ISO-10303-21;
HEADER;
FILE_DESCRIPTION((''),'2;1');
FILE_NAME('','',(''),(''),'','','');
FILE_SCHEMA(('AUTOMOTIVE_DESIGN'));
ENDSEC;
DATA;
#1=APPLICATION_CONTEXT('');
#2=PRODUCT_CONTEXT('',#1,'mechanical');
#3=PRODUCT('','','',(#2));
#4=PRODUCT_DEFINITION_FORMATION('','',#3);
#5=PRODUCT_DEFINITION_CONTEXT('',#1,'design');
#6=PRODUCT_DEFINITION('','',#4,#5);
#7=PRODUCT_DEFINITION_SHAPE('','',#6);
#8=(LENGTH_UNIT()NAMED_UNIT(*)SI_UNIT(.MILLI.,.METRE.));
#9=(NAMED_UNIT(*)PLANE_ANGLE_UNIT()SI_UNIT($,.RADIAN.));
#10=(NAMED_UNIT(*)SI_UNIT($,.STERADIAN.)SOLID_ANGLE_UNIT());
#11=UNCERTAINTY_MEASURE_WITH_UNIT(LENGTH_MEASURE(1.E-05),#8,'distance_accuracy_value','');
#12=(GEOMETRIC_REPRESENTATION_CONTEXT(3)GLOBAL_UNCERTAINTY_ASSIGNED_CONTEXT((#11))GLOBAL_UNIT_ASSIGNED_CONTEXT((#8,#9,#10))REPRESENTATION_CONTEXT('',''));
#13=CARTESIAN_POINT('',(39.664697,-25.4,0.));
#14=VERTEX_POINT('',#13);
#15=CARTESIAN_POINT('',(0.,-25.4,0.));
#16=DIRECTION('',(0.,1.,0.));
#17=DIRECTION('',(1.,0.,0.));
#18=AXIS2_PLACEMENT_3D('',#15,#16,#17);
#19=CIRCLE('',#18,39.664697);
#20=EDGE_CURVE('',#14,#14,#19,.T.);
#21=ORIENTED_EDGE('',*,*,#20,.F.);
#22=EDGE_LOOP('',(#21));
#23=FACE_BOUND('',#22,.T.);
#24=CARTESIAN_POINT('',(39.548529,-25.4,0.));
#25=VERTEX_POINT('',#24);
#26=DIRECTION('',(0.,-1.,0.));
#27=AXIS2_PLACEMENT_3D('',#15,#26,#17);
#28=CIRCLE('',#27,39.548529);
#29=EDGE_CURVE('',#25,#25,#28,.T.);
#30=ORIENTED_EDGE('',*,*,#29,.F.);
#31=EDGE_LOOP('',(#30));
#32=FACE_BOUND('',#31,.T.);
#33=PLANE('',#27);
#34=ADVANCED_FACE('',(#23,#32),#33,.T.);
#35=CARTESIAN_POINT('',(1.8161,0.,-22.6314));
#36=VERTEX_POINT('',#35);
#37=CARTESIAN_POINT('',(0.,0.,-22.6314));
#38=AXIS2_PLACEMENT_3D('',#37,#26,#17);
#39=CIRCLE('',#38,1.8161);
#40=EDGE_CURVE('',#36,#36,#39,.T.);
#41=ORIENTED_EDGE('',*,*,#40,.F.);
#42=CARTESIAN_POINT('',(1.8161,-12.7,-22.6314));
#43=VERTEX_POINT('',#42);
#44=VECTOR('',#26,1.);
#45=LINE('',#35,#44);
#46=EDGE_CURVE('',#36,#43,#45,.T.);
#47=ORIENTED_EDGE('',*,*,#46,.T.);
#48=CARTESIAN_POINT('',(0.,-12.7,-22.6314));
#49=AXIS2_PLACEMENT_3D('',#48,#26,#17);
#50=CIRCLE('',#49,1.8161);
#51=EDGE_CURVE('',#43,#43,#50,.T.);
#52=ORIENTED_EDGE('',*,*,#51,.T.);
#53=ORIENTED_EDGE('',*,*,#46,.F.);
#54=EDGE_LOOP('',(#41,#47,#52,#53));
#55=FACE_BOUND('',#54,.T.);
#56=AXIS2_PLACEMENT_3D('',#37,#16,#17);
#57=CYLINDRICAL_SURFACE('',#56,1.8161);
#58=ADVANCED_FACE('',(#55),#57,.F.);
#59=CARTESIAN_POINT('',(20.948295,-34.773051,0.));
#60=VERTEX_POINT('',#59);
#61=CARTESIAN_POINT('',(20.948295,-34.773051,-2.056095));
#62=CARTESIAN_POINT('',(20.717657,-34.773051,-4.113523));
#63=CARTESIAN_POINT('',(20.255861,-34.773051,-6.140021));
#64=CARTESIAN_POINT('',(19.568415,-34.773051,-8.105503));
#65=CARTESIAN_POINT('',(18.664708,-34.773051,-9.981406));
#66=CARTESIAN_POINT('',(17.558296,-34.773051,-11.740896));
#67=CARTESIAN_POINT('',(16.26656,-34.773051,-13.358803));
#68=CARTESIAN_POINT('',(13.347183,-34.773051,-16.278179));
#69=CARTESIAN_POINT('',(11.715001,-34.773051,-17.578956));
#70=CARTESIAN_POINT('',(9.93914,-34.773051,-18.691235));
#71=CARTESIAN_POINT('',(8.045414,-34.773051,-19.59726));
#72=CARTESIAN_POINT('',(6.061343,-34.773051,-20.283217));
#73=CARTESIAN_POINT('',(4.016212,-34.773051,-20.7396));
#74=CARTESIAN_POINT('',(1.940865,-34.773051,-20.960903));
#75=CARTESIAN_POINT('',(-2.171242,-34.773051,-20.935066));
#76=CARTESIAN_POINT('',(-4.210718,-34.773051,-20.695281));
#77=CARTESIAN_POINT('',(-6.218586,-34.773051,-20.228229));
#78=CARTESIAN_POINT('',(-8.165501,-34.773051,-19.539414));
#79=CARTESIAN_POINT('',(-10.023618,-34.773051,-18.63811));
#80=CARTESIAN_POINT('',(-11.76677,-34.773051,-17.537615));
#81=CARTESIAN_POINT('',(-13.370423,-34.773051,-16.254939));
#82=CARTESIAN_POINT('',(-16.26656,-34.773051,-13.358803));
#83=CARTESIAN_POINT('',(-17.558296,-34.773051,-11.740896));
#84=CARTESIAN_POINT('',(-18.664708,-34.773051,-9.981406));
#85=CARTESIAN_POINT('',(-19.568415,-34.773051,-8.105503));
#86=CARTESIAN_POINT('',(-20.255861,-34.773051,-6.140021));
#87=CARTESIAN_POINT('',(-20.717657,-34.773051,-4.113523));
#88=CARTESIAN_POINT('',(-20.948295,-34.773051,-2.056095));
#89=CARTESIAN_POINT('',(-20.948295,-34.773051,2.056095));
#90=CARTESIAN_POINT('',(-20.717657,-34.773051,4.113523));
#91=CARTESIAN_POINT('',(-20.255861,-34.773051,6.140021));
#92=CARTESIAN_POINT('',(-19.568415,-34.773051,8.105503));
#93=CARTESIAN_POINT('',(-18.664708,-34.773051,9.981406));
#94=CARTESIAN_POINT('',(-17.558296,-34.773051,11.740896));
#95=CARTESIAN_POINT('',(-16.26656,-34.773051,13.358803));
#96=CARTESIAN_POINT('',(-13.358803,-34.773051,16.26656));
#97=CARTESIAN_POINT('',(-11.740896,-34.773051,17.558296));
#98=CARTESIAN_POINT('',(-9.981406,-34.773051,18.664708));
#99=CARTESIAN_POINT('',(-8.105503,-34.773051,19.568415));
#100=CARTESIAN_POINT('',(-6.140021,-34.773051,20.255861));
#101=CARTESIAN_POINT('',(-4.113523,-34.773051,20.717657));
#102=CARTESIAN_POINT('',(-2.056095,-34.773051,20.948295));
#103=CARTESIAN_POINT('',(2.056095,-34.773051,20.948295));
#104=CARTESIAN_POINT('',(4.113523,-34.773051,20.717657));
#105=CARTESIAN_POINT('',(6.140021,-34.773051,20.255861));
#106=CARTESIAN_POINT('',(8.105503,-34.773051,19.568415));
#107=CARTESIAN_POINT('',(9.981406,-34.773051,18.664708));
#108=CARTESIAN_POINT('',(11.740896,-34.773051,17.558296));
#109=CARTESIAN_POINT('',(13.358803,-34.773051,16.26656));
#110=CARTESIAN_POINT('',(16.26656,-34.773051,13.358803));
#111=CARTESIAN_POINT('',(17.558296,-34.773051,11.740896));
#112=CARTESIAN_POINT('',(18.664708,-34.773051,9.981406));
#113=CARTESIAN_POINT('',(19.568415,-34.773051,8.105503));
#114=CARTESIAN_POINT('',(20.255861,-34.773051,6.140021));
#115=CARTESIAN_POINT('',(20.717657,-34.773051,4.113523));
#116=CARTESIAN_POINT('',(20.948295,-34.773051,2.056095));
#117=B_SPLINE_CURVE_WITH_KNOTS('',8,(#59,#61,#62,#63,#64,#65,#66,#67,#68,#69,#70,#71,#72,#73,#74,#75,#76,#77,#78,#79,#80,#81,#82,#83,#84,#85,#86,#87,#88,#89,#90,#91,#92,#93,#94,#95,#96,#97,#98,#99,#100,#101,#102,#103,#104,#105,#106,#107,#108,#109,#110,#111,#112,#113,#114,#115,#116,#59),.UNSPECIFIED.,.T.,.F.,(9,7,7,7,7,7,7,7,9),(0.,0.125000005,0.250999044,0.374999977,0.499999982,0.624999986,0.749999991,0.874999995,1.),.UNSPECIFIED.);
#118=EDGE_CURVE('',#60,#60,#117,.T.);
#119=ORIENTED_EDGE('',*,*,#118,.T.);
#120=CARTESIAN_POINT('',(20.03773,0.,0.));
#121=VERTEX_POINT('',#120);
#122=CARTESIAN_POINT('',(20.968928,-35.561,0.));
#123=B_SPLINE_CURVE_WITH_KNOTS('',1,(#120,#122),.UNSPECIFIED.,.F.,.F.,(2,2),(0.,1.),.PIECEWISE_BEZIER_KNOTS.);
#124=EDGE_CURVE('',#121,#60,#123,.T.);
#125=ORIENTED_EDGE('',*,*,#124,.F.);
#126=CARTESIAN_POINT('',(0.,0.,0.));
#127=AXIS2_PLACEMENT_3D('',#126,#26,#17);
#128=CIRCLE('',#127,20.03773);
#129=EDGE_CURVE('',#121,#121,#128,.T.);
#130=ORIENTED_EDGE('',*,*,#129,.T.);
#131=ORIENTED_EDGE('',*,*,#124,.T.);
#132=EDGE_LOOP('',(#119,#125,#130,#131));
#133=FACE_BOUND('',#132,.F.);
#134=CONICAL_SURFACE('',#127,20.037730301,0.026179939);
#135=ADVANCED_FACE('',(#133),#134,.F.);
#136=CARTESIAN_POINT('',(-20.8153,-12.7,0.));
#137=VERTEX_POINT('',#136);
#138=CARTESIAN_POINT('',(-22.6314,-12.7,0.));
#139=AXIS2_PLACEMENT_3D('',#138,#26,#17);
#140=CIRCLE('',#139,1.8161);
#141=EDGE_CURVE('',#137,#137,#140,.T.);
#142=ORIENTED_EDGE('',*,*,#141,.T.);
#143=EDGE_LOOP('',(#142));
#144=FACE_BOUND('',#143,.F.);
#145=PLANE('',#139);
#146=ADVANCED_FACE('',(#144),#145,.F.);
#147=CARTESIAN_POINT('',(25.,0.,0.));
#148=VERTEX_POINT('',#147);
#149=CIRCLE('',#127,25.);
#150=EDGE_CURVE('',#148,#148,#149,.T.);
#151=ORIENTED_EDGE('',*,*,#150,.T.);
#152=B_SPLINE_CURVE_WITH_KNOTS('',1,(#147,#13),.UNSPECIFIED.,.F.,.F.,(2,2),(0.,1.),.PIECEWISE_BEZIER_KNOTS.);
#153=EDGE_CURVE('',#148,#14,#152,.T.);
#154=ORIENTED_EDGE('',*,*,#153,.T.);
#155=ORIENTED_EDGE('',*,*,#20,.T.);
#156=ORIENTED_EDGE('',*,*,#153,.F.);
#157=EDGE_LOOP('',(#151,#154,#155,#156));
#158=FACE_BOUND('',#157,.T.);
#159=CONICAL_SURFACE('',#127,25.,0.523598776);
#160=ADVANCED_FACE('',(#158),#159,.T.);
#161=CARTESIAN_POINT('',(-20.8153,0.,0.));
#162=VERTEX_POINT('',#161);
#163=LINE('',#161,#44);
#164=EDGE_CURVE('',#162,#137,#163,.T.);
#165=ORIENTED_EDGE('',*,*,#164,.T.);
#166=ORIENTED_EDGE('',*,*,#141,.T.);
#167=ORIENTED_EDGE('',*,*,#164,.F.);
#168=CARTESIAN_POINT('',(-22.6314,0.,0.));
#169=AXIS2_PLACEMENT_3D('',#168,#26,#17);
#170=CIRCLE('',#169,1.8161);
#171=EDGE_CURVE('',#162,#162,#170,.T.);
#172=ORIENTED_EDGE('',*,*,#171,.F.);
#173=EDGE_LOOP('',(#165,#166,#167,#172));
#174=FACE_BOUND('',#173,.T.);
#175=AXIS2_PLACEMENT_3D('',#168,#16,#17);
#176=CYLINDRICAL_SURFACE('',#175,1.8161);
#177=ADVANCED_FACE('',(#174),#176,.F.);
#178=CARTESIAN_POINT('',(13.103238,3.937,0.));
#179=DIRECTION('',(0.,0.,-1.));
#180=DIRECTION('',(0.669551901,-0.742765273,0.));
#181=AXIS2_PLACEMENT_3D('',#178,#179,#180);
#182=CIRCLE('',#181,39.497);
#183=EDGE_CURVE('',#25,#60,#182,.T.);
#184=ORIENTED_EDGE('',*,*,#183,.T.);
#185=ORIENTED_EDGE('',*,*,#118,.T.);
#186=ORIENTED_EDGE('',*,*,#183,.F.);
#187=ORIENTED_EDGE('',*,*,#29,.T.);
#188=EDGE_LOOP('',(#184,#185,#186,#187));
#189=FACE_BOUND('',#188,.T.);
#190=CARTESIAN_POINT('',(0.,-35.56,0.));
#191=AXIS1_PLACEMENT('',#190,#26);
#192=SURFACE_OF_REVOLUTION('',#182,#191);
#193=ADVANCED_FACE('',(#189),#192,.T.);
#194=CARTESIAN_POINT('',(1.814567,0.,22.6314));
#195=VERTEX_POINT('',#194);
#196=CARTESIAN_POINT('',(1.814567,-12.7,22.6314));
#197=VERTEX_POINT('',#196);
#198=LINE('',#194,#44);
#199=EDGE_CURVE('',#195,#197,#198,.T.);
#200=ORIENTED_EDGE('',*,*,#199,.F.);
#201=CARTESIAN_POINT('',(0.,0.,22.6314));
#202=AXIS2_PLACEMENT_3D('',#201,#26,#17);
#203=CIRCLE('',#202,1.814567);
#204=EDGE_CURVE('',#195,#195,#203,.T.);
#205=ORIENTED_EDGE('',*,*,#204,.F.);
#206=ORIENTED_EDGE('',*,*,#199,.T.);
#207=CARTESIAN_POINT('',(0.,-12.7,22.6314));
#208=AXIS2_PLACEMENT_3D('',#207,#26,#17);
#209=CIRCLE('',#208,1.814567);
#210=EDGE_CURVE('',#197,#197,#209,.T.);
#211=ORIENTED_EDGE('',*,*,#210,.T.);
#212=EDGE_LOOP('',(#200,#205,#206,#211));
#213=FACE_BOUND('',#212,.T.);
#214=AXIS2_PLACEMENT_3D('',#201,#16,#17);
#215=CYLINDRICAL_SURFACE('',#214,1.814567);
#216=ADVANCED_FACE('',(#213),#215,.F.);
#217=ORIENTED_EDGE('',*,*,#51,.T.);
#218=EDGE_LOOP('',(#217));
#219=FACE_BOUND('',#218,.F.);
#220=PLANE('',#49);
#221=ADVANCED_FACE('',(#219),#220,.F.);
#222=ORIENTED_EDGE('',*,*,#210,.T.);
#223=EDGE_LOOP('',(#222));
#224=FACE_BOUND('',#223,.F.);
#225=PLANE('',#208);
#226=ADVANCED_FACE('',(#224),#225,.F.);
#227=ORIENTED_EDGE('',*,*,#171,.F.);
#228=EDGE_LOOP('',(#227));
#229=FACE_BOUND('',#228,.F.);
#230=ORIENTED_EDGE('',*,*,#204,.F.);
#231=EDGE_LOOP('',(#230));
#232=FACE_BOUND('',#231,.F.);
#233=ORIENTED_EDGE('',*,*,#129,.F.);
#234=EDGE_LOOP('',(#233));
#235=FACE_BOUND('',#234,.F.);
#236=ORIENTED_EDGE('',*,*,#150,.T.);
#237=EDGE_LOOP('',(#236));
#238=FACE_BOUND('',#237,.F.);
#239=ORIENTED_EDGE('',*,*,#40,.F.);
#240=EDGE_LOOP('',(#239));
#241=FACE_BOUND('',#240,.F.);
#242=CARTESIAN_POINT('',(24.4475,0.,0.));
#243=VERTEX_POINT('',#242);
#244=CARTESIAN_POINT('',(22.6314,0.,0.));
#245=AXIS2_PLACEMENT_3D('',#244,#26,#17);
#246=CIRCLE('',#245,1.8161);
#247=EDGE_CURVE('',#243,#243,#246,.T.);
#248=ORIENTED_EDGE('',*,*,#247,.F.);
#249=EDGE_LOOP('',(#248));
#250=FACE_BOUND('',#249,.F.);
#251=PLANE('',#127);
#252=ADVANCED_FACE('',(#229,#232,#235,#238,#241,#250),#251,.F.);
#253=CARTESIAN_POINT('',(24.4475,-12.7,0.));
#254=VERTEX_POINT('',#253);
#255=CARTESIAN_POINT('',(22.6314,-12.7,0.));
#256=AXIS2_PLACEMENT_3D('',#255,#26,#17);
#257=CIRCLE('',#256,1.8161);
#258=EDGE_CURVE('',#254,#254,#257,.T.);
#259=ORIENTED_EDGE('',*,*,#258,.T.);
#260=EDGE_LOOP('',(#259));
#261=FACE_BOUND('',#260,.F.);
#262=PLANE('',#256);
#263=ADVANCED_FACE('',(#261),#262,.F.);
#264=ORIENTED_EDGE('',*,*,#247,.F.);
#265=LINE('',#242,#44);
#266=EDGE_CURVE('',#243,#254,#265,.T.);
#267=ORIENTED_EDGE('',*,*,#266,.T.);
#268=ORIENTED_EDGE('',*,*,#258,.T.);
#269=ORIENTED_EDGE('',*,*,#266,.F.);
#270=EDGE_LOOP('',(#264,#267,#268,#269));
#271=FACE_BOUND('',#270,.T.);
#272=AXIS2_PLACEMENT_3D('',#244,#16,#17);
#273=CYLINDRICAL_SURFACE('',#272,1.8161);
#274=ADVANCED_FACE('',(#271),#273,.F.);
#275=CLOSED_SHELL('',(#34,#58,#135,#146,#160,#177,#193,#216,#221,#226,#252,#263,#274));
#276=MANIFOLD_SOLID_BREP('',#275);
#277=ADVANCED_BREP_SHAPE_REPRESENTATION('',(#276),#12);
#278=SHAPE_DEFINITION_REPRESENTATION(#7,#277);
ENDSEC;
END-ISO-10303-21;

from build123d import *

# Parameters (mm, degrees)
F0_R           = 25
F1_DEPTH       = 25.4
F1_TAPER       = -30
F3_R           = 39.5485289591
F4_DEPTH       = 10.16
F6_R           = 20.0377303014
F7_DEPTH       = 35.5610001
F7_TAPER       = -1.5
F8_R           = 1.8145667082
F9_DEPTH       = 12.7
F9_DEPTH_BACK  = 25.4
F8_R_2         = 1.8161
F10_DEPTH      = 12.7
F10_DEPTH_BACK = 12.7
F11_DEPTH      = 12.7


# Not quite as in the source:
# - a fillet or chamfer that OpenCascade refuses, or shapes differently, is made with other operations: its cross-section is extruded or revolved along the edge and cut away or added


with BuildPart() as f1:
    # F0 (on Front) → F1 (new body)
    with BuildSketch(Plane.XZ):
        Circle(F0_R)
    extrude(amount=F1_DEPTH, taper=F1_TAPER)

    # F3 (on offset) → F4 (join)
    with BuildSketch(Plane.XZ.offset(25.4)):
        Circle(F3_R)
    extrude(amount=F4_DEPTH)

    # F5: fillet of radius 39.497 on 1 edges, made by hand

    # F5_s1 → F5_t2 (revolve, cut)
    with BuildSketch(Plane.XY):
        with BuildLine():
            ThreePointArc((39.5485289591, -25.4), (27.2681504962, -32.9326114571), (13.1032375067, -35.56))
            Line((13.1032375067, -35.56), (13.1032375067, -36.34994))
            Line((13.1032375067, -36.34994), (39.5485289591, -36.34994))
            Line((39.5485289591, -36.34994), (40.3384689591, -35.56))
            ThreePointArc((40.3384689591, -35.56), (40.3384689591, -30.48), (40.0774347881, -25.98674))
            Line((40.0774347881, -25.98674), (39.5485289591, -25.4))
        make_face()
    revolve(axis=Axis((0, -35.56, 0), (0, -1, 0)), mode=Mode.SUBTRACT)

    # F6 (on Front) → F7 (cut, through all)
    with BuildSketch(Plane.XZ):
        Circle(F6_R)
    extrude(amount=F7_DEPTH, taper=F7_TAPER, mode=Mode.SUBTRACT)

    # F8 (on Front) → F9 (cut, two sides)
    with BuildSketch(Plane.XZ) as f9_sk:
        with Locations((0, 22.6314)):
            Circle(F8_R)
    extrude(amount=F9_DEPTH, mode=Mode.SUBTRACT)
    extrude(f9_sk.sketch, amount=-F9_DEPTH_BACK, mode=Mode.SUBTRACT)

    # F8 (on Front) → F10 (cut, two sides)
    with BuildSketch(Plane.XZ) as f10_sk:
        with Locations((22.6314, 0)):
            Circle(F8_R_2)
    extrude(amount=-F10_DEPTH, mode=Mode.SUBTRACT)
    extrude(f10_sk.sketch, amount=F10_DEPTH_BACK, mode=Mode.SUBTRACT)

    # F8 (on Front) → F11 (cut)
    with BuildSketch(Plane.XZ):
        with Locations((0, 22.6314)):
            Circle(F8_R)
        with Locations((22.6314, 0)):
            Circle(F8_R_2)
        with Locations((0, -22.6314)):
            Circle(F8_R_2)
        with Locations((-22.6314, 0)):
            Circle(F8_R_2)
    extrude(amount=F11_DEPTH, mode=Mode.SUBTRACT)


solid = f1.part
